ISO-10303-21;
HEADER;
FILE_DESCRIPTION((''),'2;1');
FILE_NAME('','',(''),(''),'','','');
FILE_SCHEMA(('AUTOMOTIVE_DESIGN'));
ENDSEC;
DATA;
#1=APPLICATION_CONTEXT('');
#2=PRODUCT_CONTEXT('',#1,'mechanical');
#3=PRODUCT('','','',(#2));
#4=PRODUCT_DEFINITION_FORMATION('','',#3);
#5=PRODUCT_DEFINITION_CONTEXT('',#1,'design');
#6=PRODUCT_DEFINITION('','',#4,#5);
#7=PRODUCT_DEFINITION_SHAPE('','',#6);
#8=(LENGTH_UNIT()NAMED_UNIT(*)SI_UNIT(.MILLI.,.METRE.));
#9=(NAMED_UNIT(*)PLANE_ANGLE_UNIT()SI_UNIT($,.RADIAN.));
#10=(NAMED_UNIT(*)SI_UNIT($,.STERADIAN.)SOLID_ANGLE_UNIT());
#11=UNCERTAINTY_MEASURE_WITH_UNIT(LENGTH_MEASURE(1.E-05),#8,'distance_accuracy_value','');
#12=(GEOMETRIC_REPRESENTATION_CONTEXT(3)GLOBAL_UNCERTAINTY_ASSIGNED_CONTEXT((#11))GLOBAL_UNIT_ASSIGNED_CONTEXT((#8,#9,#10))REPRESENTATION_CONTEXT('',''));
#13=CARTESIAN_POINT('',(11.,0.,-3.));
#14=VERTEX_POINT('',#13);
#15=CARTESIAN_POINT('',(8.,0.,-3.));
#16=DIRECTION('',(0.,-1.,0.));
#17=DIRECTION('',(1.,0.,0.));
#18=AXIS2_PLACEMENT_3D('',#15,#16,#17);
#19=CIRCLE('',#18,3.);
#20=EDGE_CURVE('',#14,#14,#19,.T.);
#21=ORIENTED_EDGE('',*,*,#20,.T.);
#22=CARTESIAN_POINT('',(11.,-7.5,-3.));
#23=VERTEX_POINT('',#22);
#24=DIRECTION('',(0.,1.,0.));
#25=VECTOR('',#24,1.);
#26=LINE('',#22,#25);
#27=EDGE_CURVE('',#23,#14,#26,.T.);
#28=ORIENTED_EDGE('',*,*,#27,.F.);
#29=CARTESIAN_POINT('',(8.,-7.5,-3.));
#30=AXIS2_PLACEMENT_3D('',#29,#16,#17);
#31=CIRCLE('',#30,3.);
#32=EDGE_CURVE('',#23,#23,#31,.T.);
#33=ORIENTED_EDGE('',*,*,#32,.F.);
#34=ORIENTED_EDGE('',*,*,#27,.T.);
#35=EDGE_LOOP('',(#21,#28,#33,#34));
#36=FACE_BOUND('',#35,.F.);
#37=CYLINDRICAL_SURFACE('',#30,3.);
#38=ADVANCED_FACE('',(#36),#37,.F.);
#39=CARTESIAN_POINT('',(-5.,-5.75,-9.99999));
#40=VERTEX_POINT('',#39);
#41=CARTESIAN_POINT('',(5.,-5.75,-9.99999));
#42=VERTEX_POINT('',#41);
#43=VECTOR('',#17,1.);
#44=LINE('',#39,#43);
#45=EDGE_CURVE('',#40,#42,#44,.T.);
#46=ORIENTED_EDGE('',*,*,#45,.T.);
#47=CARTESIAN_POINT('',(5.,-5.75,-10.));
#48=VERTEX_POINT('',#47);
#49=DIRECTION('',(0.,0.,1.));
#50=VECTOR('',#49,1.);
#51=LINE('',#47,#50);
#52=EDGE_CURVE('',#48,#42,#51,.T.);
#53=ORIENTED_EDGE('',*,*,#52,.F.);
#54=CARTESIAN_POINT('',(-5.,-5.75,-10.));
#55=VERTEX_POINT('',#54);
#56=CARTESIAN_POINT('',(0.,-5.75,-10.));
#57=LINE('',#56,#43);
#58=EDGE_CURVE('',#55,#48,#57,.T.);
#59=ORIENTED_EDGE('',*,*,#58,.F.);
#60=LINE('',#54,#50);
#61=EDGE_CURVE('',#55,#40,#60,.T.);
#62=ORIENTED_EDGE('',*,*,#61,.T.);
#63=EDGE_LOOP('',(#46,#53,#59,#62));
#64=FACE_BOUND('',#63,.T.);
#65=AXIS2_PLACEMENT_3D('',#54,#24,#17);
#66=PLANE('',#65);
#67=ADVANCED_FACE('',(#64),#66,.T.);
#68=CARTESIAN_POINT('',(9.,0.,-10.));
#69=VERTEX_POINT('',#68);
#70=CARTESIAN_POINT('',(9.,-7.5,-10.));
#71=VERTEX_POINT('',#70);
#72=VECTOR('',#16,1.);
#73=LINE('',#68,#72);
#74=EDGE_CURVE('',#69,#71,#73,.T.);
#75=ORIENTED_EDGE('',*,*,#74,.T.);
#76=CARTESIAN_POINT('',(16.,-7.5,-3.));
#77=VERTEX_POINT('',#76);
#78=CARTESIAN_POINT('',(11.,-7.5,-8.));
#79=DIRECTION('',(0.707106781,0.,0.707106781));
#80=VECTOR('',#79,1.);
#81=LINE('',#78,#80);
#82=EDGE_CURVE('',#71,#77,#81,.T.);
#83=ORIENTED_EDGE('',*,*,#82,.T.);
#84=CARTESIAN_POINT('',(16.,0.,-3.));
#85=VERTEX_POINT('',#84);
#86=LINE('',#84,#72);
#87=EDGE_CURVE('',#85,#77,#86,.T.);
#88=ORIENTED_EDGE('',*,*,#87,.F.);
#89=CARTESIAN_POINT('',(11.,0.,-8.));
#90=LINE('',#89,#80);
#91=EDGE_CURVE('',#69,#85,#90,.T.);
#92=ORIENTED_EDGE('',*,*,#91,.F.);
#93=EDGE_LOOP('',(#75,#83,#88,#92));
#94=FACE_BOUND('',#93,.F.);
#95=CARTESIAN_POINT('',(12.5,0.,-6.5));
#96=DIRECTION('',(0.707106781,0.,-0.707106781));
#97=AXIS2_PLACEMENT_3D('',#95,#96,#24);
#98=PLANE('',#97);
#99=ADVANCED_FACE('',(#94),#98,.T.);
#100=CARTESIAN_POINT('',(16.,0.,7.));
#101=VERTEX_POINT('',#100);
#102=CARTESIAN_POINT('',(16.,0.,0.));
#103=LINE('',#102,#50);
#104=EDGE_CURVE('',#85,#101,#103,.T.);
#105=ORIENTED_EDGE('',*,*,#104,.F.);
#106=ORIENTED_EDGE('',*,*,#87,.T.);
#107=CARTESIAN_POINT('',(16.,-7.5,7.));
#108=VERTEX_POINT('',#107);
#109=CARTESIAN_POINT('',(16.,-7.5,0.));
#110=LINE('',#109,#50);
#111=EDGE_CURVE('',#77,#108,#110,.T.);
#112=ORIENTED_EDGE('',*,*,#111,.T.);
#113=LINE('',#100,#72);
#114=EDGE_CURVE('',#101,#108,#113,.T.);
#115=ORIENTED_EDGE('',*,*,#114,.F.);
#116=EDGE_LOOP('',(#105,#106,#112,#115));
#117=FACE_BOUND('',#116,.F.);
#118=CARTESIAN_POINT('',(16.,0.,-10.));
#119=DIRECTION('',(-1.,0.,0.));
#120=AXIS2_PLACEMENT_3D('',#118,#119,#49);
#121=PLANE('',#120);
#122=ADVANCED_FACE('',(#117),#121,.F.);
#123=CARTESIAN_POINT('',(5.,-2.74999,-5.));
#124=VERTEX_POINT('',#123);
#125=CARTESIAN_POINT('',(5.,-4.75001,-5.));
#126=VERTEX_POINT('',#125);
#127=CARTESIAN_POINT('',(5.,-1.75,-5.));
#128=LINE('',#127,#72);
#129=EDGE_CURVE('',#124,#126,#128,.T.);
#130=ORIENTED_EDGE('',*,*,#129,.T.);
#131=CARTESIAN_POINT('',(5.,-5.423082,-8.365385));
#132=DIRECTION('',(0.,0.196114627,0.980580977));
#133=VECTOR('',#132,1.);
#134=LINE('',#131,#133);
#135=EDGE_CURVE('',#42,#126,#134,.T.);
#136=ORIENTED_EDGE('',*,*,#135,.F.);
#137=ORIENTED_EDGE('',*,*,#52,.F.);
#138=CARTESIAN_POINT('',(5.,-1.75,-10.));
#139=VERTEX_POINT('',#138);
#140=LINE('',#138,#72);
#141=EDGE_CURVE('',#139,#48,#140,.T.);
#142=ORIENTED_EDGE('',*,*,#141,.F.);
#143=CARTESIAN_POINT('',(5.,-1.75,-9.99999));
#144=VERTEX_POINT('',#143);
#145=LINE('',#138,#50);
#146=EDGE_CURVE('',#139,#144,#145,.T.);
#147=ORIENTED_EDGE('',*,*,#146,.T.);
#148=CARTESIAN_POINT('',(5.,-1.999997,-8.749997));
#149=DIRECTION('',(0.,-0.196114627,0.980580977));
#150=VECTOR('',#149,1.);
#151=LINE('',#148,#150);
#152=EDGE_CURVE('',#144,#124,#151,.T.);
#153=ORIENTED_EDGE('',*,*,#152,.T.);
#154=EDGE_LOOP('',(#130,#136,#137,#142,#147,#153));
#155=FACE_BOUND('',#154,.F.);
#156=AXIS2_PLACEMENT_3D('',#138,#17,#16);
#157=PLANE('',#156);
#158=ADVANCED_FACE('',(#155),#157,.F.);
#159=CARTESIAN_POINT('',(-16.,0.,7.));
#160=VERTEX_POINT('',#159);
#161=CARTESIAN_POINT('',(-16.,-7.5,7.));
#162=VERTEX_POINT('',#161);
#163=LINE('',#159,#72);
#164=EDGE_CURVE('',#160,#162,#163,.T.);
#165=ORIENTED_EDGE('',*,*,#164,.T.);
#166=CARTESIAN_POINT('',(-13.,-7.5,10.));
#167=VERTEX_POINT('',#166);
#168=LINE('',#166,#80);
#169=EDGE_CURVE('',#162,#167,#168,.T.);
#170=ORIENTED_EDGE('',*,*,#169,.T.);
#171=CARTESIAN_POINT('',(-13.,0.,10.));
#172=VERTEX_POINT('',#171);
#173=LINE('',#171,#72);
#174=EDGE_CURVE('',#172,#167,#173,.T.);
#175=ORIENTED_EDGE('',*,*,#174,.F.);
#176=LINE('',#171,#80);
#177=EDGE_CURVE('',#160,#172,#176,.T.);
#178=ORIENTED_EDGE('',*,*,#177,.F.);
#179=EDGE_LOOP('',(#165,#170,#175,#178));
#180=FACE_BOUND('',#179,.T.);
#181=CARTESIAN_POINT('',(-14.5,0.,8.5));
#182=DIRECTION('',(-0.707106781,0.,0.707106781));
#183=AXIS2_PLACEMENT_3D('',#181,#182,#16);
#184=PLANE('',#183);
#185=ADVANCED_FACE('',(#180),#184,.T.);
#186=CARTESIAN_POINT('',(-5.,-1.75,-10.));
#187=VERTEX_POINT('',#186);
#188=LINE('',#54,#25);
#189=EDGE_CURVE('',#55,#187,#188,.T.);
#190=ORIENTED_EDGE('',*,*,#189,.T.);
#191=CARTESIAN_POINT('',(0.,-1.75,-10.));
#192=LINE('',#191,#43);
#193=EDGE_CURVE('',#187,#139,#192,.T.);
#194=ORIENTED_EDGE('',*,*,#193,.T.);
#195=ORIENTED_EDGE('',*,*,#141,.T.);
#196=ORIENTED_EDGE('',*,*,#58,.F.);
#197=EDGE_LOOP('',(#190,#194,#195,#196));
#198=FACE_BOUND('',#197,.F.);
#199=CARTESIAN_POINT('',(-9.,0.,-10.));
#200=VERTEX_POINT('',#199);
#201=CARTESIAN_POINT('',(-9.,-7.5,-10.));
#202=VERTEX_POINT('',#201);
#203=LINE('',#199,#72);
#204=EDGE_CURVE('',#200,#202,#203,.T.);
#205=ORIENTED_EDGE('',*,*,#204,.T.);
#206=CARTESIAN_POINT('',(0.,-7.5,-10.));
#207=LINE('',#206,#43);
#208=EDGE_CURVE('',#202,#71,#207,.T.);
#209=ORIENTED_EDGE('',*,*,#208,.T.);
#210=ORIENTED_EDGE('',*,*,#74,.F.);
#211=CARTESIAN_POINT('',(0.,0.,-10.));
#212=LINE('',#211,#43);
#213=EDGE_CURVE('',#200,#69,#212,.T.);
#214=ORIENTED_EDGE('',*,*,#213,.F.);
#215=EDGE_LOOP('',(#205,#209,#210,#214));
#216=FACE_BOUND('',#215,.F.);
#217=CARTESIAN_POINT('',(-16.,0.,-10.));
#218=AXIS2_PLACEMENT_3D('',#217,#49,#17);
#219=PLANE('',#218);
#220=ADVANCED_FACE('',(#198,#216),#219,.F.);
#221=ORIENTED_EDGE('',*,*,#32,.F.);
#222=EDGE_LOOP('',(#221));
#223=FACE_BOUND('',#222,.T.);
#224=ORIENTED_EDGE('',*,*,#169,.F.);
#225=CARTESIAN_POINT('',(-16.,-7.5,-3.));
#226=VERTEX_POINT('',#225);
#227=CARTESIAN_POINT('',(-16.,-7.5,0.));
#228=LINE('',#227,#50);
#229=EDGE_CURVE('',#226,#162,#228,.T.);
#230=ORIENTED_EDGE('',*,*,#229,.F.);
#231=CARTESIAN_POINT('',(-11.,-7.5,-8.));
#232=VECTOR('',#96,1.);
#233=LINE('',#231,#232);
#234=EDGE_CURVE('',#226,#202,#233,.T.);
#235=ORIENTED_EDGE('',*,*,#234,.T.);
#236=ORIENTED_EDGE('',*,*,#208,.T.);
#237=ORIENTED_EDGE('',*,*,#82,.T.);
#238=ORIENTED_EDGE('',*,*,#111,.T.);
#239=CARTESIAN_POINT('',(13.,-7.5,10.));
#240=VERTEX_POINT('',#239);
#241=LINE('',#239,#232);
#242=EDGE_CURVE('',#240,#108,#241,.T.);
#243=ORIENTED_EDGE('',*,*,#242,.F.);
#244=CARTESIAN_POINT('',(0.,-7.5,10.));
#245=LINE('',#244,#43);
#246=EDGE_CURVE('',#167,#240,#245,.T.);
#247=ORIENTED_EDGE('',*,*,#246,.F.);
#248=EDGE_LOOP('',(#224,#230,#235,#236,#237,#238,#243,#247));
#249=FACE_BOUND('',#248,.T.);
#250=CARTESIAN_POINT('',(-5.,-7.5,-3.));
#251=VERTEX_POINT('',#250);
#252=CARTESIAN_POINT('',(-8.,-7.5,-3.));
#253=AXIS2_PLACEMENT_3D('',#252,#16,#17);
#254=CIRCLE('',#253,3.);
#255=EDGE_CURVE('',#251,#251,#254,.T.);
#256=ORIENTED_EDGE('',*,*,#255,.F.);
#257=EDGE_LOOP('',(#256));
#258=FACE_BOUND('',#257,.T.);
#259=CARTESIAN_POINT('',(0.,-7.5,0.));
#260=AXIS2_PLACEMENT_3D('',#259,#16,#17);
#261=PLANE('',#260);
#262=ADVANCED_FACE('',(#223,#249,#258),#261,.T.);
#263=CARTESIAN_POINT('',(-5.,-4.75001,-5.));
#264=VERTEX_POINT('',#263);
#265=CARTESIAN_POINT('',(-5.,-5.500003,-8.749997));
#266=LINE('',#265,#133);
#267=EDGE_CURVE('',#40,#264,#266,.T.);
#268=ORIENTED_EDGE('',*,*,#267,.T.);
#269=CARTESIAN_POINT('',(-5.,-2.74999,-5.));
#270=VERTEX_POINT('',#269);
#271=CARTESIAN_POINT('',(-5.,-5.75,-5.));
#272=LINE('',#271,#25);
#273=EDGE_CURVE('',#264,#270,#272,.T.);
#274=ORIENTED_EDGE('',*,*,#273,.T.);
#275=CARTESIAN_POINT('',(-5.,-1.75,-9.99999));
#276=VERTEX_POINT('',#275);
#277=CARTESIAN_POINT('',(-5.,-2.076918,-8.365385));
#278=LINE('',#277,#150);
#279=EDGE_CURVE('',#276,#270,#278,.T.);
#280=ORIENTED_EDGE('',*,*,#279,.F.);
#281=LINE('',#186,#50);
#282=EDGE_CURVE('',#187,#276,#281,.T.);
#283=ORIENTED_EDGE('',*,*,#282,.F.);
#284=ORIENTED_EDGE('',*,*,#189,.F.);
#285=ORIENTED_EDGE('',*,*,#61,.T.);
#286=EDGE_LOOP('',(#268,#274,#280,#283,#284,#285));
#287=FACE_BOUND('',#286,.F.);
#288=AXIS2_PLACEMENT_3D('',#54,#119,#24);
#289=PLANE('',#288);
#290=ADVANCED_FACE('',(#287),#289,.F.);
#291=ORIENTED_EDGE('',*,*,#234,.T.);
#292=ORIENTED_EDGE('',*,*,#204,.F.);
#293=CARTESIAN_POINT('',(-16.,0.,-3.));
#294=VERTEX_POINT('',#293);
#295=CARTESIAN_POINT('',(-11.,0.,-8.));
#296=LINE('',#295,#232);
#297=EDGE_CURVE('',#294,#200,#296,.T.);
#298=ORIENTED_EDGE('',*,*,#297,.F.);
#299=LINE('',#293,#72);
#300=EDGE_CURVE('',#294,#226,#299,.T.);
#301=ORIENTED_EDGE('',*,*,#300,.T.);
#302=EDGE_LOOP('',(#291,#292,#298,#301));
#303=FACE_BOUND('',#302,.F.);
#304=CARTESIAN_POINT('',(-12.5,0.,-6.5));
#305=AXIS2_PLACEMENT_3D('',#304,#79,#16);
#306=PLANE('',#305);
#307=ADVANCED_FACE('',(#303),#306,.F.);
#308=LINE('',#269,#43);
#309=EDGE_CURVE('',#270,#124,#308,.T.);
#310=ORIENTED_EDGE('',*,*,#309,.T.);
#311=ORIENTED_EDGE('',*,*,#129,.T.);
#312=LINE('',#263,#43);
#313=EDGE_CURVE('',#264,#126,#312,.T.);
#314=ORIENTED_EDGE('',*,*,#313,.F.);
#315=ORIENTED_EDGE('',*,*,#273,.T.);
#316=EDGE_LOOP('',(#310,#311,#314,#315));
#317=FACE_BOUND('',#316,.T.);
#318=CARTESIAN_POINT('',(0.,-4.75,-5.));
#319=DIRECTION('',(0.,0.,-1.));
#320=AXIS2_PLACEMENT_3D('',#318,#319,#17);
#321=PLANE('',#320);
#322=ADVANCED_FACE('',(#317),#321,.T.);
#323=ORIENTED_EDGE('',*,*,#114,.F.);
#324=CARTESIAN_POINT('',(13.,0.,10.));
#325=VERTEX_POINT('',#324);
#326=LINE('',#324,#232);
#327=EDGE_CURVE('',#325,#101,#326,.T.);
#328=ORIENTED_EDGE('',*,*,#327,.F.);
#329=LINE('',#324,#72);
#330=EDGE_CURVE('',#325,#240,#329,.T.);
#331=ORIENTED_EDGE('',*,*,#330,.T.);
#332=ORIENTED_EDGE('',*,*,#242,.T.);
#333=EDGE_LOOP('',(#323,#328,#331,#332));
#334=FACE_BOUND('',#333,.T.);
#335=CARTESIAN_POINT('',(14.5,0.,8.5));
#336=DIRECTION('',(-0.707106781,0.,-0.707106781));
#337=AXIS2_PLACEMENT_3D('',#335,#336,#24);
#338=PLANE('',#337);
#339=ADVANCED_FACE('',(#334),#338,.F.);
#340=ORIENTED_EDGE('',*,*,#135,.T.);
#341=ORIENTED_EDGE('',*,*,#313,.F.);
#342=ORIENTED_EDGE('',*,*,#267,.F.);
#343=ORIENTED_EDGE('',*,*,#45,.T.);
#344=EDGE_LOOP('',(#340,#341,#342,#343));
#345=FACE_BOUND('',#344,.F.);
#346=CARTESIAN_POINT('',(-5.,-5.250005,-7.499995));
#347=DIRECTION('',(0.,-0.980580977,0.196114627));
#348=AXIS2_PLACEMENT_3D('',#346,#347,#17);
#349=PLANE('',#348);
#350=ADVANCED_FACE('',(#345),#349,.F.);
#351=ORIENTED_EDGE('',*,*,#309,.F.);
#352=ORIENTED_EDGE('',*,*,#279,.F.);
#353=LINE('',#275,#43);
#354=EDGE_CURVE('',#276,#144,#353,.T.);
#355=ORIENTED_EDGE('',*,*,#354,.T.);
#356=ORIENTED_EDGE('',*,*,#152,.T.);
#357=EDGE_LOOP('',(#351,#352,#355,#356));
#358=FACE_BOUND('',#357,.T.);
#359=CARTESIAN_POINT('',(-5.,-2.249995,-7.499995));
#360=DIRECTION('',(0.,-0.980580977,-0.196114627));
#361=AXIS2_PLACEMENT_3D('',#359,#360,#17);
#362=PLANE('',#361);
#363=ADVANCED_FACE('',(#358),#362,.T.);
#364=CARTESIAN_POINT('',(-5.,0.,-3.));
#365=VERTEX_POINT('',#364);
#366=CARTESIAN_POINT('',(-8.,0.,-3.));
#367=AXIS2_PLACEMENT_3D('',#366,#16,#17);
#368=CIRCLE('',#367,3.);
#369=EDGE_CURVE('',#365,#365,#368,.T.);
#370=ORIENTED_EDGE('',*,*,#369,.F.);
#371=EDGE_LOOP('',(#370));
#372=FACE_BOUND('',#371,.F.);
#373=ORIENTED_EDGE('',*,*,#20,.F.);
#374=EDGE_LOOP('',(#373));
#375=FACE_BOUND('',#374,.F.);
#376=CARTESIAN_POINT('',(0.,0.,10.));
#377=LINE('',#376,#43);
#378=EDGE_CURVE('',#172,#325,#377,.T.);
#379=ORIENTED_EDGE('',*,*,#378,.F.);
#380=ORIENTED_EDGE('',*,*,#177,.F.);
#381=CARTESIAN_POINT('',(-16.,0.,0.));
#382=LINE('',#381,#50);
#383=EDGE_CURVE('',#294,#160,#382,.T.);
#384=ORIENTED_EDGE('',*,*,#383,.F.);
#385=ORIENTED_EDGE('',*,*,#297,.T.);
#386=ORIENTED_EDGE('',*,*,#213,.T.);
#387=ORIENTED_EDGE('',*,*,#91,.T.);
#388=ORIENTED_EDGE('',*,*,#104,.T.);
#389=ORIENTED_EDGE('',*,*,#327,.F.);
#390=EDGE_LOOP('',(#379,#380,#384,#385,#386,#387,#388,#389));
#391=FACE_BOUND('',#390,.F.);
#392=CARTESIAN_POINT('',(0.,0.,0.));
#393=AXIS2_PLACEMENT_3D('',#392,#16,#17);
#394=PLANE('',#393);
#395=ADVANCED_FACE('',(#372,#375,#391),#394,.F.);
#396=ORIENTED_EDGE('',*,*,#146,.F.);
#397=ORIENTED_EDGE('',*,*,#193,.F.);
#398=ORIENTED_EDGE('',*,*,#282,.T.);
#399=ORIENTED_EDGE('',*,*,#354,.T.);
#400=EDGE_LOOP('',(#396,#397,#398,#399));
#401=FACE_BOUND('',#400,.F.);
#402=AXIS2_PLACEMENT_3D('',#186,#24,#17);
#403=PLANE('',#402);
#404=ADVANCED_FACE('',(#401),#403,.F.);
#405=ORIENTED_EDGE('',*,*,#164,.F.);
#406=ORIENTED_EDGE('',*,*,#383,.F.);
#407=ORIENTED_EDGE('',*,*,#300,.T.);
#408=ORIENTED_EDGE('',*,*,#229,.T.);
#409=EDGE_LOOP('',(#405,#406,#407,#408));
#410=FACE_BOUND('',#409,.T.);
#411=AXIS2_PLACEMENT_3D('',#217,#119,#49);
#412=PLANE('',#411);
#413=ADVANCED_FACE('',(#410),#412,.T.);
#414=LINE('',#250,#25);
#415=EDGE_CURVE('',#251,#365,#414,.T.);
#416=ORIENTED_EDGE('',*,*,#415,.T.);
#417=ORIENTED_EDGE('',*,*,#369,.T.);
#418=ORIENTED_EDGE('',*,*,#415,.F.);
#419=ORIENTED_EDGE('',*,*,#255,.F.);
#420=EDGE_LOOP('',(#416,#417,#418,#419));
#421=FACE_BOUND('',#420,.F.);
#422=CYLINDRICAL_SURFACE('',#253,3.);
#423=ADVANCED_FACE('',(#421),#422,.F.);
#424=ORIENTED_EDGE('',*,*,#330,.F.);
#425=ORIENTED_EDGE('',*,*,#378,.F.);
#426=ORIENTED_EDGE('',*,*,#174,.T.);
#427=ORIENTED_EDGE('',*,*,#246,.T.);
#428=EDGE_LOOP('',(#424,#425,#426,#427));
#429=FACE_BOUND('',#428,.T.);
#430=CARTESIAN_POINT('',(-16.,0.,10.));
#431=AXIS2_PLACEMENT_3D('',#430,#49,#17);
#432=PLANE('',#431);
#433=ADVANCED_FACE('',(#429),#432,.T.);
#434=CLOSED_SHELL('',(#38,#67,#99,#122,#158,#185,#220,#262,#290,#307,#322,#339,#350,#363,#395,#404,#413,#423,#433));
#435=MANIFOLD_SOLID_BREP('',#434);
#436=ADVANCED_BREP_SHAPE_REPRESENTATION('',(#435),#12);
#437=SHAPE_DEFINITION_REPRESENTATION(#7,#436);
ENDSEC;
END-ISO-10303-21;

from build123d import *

# Parameters (mm, degrees)
F1_W     = 32
F1_H     = 20
F2_DEPTH = 7.5
F3_SIZE  = 7
F4_R     = 3
F5_DEPTH = 25
F6_SIZE  = 3
F7_W     = 10
F7_H     = 2
F8_DEPTH = 5
F9_SIZE2 = 0.99999
F9_SIZE  = 4.99999


# Not quite as in the source:
# - a fillet or chamfer is up to 0.001 mm smaller than in the source, because OpenCascade refuses the exact size


with BuildPart() as f2:
    # F1 (on Front) → F2 (new body)
    with BuildSketch(Plane.XZ):
        Rectangle(F1_W, F1_H)
    extrude(amount=F2_DEPTH)

    # F3
    f3_edges = [f2.edges().sort_by_distance(p)[0] for p in [
        (-16, -3.75, -10),
        (16, -3.75, -10),
    ]]
    chamfer(f3_edges, length=F3_SIZE)

    # F4 (on face) → F5 (cut)
    with BuildSketch(Plane.XZ.offset(7.5)):
        with Locations((-8, -3)):
            Circle(F4_R)
        with Locations((8, -3)):
            Circle(F4_R)
    extrude(amount=-F5_DEPTH, mode=Mode.SUBTRACT)

    # F6
    f6_edges = [f2.edges().sort_by_distance(p)[0] for p in [
        (16, -3.75, 10),
        (-16, -3.75, 10),
    ]]
    chamfer(f6_edges, length=F6_SIZE)

    # F7 (on face) → F8 (cut)
    with BuildSketch(Plane(origin=(0, 0, -10), x_dir=(1, 0, 0), z_dir=(0, 0, -1))):
        with Locations((0, 4.75)):
            Rectangle(F7_W, F7_H)
        with Locations((0, 2.75)):
            Rectangle(F7_W, F7_H)
    extrude(amount=-F8_DEPTH, mode=Mode.SUBTRACT)

    # F9 (size 5 and 1 in the source; OpenCascade refuses exactly that, so slightly less here)
    f9_edges = [f2.edges().sort_by_distance(p)[0] for p in [
        (0, -1.75, -5),
        (0, -5.75, -5),
    ]]
    chamfer(f9_edges, length=F9_SIZE, length2=F9_SIZE2)


solid = f2.part
